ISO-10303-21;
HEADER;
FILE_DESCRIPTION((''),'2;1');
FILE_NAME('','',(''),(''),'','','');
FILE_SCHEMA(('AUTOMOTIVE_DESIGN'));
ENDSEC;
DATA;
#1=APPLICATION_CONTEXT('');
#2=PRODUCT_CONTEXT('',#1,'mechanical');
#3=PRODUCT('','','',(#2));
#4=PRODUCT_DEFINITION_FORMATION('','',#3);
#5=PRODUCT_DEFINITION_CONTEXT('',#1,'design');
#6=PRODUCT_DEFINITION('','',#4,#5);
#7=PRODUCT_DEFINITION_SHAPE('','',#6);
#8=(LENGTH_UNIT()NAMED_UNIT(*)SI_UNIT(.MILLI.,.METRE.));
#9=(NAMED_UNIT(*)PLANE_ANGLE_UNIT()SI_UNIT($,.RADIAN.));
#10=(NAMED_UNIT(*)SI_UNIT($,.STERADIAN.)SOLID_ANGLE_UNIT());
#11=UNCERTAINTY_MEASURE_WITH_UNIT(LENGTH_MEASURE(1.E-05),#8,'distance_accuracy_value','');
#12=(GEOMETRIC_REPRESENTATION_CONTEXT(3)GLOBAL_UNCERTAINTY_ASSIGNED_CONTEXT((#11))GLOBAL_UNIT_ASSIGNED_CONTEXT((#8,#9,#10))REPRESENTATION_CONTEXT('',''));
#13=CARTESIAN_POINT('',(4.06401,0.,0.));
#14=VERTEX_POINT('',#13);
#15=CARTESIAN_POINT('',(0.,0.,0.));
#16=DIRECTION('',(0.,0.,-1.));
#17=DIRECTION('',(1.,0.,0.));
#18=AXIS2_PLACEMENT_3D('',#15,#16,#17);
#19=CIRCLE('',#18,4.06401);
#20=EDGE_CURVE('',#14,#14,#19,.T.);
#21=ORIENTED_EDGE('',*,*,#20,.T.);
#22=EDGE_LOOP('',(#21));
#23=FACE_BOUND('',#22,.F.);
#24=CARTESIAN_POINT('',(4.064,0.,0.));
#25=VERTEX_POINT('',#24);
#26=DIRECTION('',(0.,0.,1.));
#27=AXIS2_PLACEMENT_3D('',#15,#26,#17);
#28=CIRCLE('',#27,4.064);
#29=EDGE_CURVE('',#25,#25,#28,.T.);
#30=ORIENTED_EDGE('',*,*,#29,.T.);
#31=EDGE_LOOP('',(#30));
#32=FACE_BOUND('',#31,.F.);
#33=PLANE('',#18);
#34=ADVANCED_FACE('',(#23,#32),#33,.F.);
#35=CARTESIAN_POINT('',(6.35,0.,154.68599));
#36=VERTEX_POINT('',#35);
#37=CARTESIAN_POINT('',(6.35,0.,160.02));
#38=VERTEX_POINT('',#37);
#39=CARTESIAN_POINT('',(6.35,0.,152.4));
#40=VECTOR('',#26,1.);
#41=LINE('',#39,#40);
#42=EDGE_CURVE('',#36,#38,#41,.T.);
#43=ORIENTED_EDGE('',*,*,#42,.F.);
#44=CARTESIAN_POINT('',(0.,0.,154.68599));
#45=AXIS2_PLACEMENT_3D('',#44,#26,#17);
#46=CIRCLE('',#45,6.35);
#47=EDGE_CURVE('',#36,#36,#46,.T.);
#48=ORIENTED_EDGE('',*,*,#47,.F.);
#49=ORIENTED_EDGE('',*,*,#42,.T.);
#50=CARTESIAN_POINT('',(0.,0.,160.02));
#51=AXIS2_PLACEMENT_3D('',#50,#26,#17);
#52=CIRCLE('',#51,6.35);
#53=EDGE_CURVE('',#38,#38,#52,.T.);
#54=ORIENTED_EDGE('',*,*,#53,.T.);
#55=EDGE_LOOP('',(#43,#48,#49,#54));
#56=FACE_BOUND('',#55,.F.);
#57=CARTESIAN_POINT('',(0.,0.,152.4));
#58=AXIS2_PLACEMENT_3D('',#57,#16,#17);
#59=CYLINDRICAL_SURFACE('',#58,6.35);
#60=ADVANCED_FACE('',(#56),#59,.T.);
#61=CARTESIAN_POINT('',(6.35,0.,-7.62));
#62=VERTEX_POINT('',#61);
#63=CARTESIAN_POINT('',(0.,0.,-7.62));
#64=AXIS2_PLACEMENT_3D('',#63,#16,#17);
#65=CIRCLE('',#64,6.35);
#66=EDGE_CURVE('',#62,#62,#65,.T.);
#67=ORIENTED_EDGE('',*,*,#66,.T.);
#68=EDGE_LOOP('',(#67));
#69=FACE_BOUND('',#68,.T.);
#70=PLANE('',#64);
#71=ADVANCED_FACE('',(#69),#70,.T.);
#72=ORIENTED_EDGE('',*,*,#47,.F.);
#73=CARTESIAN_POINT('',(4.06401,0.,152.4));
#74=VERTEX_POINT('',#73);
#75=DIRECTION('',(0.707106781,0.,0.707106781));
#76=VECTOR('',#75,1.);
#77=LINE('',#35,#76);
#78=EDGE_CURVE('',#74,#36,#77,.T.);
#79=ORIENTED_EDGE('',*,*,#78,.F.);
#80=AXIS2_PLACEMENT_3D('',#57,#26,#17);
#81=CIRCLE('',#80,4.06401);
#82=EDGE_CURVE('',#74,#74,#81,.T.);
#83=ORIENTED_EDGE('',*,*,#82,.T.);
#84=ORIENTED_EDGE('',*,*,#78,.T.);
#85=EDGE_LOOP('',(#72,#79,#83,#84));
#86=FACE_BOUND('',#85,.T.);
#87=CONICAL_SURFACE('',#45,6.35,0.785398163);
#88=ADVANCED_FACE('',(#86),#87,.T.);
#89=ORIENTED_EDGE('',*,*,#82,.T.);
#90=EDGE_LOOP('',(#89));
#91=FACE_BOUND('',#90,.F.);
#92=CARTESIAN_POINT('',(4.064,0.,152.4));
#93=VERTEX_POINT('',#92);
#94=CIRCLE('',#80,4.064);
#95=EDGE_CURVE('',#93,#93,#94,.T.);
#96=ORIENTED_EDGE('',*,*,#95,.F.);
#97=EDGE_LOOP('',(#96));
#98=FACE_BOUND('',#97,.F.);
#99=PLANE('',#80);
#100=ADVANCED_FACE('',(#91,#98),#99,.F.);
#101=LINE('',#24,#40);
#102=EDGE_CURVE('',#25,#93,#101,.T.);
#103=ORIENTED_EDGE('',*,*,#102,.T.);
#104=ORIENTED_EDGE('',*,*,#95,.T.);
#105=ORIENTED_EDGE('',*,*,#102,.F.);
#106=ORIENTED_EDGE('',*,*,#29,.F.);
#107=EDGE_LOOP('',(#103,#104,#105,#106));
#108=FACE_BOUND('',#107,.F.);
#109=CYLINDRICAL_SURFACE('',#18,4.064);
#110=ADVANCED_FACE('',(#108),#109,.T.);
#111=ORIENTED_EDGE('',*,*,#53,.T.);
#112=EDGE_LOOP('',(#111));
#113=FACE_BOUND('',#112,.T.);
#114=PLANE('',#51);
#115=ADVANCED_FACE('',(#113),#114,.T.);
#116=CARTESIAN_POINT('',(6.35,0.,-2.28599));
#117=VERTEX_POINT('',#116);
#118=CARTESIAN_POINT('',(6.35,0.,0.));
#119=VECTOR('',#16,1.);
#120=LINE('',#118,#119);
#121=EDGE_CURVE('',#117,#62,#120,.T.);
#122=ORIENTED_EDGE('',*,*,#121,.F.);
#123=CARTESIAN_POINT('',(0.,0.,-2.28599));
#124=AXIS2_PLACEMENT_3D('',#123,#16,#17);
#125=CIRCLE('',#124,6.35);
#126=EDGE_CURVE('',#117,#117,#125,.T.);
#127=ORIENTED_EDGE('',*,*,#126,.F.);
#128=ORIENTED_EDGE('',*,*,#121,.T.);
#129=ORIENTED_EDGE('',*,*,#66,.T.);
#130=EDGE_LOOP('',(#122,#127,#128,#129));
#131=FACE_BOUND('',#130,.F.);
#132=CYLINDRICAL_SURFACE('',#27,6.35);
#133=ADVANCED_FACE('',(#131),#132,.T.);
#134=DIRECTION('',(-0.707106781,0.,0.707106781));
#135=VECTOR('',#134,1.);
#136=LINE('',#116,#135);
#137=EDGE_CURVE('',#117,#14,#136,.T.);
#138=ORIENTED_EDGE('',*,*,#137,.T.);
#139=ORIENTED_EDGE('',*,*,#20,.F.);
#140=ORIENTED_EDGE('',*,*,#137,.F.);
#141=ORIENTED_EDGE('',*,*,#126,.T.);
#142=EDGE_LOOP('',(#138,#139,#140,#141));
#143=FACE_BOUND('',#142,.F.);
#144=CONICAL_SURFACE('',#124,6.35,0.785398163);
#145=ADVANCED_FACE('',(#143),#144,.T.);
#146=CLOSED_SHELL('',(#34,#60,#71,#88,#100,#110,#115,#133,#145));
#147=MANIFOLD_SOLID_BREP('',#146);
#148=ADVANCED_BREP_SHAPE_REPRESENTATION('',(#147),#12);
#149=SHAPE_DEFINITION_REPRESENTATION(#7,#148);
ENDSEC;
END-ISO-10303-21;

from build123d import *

# Parameters (mm, degrees)
F0_R     = 4.064
F1_DEPTH = 152.4
F2_R     = 6.35
F2_R_2   = 4.064
F3_DEPTH = 7.62
F4_R     = 6.35
F4_R_2   = 4.064
F5_DEPTH = 7.62
F6_SIZE  = 2.28599


# Not quite as in the source:
# - a fillet or chamfer is up to 0.001 mm smaller than in the source, because OpenCascade refuses the exact size


with BuildPart() as f1:
    # F0 (on Top) → F1 (new body)
    with BuildSketch(Plane.XY):
        Circle(F0_R)
    extrude(amount=F1_DEPTH)

    # F2 (on face) → F3 (join)
    with BuildSketch(Plane.XY.offset(152.4)):
        Circle(F2_R)
        Circle(F2_R_2, mode=Mode.SUBTRACT)
        Circle(F2_R_2)
    extrude(amount=F3_DEPTH)

    # F4 (on face) → F5 (join)
    with BuildSketch(Plane(origin=(0, 0, 0), x_dir=(1, 0, 0), z_dir=(0, 0, -1))):
        Circle(F4_R)
        Circle(F4_R_2, mode=Mode.SUBTRACT)
        Circle(F4_R_2)
    extrude(amount=F5_DEPTH)

    # F6 (size 2.286 in the source; OpenCascade refuses exactly that, so slightly less here)
    f6_edges = [f1.edges().sort_by_distance(p)[0] for p in [
        (-6.35, 0, 0),
        (-6.35, 0, 152.4),
    ]]
    chamfer(f6_edges, length=F6_SIZE)


solid = f1.part
